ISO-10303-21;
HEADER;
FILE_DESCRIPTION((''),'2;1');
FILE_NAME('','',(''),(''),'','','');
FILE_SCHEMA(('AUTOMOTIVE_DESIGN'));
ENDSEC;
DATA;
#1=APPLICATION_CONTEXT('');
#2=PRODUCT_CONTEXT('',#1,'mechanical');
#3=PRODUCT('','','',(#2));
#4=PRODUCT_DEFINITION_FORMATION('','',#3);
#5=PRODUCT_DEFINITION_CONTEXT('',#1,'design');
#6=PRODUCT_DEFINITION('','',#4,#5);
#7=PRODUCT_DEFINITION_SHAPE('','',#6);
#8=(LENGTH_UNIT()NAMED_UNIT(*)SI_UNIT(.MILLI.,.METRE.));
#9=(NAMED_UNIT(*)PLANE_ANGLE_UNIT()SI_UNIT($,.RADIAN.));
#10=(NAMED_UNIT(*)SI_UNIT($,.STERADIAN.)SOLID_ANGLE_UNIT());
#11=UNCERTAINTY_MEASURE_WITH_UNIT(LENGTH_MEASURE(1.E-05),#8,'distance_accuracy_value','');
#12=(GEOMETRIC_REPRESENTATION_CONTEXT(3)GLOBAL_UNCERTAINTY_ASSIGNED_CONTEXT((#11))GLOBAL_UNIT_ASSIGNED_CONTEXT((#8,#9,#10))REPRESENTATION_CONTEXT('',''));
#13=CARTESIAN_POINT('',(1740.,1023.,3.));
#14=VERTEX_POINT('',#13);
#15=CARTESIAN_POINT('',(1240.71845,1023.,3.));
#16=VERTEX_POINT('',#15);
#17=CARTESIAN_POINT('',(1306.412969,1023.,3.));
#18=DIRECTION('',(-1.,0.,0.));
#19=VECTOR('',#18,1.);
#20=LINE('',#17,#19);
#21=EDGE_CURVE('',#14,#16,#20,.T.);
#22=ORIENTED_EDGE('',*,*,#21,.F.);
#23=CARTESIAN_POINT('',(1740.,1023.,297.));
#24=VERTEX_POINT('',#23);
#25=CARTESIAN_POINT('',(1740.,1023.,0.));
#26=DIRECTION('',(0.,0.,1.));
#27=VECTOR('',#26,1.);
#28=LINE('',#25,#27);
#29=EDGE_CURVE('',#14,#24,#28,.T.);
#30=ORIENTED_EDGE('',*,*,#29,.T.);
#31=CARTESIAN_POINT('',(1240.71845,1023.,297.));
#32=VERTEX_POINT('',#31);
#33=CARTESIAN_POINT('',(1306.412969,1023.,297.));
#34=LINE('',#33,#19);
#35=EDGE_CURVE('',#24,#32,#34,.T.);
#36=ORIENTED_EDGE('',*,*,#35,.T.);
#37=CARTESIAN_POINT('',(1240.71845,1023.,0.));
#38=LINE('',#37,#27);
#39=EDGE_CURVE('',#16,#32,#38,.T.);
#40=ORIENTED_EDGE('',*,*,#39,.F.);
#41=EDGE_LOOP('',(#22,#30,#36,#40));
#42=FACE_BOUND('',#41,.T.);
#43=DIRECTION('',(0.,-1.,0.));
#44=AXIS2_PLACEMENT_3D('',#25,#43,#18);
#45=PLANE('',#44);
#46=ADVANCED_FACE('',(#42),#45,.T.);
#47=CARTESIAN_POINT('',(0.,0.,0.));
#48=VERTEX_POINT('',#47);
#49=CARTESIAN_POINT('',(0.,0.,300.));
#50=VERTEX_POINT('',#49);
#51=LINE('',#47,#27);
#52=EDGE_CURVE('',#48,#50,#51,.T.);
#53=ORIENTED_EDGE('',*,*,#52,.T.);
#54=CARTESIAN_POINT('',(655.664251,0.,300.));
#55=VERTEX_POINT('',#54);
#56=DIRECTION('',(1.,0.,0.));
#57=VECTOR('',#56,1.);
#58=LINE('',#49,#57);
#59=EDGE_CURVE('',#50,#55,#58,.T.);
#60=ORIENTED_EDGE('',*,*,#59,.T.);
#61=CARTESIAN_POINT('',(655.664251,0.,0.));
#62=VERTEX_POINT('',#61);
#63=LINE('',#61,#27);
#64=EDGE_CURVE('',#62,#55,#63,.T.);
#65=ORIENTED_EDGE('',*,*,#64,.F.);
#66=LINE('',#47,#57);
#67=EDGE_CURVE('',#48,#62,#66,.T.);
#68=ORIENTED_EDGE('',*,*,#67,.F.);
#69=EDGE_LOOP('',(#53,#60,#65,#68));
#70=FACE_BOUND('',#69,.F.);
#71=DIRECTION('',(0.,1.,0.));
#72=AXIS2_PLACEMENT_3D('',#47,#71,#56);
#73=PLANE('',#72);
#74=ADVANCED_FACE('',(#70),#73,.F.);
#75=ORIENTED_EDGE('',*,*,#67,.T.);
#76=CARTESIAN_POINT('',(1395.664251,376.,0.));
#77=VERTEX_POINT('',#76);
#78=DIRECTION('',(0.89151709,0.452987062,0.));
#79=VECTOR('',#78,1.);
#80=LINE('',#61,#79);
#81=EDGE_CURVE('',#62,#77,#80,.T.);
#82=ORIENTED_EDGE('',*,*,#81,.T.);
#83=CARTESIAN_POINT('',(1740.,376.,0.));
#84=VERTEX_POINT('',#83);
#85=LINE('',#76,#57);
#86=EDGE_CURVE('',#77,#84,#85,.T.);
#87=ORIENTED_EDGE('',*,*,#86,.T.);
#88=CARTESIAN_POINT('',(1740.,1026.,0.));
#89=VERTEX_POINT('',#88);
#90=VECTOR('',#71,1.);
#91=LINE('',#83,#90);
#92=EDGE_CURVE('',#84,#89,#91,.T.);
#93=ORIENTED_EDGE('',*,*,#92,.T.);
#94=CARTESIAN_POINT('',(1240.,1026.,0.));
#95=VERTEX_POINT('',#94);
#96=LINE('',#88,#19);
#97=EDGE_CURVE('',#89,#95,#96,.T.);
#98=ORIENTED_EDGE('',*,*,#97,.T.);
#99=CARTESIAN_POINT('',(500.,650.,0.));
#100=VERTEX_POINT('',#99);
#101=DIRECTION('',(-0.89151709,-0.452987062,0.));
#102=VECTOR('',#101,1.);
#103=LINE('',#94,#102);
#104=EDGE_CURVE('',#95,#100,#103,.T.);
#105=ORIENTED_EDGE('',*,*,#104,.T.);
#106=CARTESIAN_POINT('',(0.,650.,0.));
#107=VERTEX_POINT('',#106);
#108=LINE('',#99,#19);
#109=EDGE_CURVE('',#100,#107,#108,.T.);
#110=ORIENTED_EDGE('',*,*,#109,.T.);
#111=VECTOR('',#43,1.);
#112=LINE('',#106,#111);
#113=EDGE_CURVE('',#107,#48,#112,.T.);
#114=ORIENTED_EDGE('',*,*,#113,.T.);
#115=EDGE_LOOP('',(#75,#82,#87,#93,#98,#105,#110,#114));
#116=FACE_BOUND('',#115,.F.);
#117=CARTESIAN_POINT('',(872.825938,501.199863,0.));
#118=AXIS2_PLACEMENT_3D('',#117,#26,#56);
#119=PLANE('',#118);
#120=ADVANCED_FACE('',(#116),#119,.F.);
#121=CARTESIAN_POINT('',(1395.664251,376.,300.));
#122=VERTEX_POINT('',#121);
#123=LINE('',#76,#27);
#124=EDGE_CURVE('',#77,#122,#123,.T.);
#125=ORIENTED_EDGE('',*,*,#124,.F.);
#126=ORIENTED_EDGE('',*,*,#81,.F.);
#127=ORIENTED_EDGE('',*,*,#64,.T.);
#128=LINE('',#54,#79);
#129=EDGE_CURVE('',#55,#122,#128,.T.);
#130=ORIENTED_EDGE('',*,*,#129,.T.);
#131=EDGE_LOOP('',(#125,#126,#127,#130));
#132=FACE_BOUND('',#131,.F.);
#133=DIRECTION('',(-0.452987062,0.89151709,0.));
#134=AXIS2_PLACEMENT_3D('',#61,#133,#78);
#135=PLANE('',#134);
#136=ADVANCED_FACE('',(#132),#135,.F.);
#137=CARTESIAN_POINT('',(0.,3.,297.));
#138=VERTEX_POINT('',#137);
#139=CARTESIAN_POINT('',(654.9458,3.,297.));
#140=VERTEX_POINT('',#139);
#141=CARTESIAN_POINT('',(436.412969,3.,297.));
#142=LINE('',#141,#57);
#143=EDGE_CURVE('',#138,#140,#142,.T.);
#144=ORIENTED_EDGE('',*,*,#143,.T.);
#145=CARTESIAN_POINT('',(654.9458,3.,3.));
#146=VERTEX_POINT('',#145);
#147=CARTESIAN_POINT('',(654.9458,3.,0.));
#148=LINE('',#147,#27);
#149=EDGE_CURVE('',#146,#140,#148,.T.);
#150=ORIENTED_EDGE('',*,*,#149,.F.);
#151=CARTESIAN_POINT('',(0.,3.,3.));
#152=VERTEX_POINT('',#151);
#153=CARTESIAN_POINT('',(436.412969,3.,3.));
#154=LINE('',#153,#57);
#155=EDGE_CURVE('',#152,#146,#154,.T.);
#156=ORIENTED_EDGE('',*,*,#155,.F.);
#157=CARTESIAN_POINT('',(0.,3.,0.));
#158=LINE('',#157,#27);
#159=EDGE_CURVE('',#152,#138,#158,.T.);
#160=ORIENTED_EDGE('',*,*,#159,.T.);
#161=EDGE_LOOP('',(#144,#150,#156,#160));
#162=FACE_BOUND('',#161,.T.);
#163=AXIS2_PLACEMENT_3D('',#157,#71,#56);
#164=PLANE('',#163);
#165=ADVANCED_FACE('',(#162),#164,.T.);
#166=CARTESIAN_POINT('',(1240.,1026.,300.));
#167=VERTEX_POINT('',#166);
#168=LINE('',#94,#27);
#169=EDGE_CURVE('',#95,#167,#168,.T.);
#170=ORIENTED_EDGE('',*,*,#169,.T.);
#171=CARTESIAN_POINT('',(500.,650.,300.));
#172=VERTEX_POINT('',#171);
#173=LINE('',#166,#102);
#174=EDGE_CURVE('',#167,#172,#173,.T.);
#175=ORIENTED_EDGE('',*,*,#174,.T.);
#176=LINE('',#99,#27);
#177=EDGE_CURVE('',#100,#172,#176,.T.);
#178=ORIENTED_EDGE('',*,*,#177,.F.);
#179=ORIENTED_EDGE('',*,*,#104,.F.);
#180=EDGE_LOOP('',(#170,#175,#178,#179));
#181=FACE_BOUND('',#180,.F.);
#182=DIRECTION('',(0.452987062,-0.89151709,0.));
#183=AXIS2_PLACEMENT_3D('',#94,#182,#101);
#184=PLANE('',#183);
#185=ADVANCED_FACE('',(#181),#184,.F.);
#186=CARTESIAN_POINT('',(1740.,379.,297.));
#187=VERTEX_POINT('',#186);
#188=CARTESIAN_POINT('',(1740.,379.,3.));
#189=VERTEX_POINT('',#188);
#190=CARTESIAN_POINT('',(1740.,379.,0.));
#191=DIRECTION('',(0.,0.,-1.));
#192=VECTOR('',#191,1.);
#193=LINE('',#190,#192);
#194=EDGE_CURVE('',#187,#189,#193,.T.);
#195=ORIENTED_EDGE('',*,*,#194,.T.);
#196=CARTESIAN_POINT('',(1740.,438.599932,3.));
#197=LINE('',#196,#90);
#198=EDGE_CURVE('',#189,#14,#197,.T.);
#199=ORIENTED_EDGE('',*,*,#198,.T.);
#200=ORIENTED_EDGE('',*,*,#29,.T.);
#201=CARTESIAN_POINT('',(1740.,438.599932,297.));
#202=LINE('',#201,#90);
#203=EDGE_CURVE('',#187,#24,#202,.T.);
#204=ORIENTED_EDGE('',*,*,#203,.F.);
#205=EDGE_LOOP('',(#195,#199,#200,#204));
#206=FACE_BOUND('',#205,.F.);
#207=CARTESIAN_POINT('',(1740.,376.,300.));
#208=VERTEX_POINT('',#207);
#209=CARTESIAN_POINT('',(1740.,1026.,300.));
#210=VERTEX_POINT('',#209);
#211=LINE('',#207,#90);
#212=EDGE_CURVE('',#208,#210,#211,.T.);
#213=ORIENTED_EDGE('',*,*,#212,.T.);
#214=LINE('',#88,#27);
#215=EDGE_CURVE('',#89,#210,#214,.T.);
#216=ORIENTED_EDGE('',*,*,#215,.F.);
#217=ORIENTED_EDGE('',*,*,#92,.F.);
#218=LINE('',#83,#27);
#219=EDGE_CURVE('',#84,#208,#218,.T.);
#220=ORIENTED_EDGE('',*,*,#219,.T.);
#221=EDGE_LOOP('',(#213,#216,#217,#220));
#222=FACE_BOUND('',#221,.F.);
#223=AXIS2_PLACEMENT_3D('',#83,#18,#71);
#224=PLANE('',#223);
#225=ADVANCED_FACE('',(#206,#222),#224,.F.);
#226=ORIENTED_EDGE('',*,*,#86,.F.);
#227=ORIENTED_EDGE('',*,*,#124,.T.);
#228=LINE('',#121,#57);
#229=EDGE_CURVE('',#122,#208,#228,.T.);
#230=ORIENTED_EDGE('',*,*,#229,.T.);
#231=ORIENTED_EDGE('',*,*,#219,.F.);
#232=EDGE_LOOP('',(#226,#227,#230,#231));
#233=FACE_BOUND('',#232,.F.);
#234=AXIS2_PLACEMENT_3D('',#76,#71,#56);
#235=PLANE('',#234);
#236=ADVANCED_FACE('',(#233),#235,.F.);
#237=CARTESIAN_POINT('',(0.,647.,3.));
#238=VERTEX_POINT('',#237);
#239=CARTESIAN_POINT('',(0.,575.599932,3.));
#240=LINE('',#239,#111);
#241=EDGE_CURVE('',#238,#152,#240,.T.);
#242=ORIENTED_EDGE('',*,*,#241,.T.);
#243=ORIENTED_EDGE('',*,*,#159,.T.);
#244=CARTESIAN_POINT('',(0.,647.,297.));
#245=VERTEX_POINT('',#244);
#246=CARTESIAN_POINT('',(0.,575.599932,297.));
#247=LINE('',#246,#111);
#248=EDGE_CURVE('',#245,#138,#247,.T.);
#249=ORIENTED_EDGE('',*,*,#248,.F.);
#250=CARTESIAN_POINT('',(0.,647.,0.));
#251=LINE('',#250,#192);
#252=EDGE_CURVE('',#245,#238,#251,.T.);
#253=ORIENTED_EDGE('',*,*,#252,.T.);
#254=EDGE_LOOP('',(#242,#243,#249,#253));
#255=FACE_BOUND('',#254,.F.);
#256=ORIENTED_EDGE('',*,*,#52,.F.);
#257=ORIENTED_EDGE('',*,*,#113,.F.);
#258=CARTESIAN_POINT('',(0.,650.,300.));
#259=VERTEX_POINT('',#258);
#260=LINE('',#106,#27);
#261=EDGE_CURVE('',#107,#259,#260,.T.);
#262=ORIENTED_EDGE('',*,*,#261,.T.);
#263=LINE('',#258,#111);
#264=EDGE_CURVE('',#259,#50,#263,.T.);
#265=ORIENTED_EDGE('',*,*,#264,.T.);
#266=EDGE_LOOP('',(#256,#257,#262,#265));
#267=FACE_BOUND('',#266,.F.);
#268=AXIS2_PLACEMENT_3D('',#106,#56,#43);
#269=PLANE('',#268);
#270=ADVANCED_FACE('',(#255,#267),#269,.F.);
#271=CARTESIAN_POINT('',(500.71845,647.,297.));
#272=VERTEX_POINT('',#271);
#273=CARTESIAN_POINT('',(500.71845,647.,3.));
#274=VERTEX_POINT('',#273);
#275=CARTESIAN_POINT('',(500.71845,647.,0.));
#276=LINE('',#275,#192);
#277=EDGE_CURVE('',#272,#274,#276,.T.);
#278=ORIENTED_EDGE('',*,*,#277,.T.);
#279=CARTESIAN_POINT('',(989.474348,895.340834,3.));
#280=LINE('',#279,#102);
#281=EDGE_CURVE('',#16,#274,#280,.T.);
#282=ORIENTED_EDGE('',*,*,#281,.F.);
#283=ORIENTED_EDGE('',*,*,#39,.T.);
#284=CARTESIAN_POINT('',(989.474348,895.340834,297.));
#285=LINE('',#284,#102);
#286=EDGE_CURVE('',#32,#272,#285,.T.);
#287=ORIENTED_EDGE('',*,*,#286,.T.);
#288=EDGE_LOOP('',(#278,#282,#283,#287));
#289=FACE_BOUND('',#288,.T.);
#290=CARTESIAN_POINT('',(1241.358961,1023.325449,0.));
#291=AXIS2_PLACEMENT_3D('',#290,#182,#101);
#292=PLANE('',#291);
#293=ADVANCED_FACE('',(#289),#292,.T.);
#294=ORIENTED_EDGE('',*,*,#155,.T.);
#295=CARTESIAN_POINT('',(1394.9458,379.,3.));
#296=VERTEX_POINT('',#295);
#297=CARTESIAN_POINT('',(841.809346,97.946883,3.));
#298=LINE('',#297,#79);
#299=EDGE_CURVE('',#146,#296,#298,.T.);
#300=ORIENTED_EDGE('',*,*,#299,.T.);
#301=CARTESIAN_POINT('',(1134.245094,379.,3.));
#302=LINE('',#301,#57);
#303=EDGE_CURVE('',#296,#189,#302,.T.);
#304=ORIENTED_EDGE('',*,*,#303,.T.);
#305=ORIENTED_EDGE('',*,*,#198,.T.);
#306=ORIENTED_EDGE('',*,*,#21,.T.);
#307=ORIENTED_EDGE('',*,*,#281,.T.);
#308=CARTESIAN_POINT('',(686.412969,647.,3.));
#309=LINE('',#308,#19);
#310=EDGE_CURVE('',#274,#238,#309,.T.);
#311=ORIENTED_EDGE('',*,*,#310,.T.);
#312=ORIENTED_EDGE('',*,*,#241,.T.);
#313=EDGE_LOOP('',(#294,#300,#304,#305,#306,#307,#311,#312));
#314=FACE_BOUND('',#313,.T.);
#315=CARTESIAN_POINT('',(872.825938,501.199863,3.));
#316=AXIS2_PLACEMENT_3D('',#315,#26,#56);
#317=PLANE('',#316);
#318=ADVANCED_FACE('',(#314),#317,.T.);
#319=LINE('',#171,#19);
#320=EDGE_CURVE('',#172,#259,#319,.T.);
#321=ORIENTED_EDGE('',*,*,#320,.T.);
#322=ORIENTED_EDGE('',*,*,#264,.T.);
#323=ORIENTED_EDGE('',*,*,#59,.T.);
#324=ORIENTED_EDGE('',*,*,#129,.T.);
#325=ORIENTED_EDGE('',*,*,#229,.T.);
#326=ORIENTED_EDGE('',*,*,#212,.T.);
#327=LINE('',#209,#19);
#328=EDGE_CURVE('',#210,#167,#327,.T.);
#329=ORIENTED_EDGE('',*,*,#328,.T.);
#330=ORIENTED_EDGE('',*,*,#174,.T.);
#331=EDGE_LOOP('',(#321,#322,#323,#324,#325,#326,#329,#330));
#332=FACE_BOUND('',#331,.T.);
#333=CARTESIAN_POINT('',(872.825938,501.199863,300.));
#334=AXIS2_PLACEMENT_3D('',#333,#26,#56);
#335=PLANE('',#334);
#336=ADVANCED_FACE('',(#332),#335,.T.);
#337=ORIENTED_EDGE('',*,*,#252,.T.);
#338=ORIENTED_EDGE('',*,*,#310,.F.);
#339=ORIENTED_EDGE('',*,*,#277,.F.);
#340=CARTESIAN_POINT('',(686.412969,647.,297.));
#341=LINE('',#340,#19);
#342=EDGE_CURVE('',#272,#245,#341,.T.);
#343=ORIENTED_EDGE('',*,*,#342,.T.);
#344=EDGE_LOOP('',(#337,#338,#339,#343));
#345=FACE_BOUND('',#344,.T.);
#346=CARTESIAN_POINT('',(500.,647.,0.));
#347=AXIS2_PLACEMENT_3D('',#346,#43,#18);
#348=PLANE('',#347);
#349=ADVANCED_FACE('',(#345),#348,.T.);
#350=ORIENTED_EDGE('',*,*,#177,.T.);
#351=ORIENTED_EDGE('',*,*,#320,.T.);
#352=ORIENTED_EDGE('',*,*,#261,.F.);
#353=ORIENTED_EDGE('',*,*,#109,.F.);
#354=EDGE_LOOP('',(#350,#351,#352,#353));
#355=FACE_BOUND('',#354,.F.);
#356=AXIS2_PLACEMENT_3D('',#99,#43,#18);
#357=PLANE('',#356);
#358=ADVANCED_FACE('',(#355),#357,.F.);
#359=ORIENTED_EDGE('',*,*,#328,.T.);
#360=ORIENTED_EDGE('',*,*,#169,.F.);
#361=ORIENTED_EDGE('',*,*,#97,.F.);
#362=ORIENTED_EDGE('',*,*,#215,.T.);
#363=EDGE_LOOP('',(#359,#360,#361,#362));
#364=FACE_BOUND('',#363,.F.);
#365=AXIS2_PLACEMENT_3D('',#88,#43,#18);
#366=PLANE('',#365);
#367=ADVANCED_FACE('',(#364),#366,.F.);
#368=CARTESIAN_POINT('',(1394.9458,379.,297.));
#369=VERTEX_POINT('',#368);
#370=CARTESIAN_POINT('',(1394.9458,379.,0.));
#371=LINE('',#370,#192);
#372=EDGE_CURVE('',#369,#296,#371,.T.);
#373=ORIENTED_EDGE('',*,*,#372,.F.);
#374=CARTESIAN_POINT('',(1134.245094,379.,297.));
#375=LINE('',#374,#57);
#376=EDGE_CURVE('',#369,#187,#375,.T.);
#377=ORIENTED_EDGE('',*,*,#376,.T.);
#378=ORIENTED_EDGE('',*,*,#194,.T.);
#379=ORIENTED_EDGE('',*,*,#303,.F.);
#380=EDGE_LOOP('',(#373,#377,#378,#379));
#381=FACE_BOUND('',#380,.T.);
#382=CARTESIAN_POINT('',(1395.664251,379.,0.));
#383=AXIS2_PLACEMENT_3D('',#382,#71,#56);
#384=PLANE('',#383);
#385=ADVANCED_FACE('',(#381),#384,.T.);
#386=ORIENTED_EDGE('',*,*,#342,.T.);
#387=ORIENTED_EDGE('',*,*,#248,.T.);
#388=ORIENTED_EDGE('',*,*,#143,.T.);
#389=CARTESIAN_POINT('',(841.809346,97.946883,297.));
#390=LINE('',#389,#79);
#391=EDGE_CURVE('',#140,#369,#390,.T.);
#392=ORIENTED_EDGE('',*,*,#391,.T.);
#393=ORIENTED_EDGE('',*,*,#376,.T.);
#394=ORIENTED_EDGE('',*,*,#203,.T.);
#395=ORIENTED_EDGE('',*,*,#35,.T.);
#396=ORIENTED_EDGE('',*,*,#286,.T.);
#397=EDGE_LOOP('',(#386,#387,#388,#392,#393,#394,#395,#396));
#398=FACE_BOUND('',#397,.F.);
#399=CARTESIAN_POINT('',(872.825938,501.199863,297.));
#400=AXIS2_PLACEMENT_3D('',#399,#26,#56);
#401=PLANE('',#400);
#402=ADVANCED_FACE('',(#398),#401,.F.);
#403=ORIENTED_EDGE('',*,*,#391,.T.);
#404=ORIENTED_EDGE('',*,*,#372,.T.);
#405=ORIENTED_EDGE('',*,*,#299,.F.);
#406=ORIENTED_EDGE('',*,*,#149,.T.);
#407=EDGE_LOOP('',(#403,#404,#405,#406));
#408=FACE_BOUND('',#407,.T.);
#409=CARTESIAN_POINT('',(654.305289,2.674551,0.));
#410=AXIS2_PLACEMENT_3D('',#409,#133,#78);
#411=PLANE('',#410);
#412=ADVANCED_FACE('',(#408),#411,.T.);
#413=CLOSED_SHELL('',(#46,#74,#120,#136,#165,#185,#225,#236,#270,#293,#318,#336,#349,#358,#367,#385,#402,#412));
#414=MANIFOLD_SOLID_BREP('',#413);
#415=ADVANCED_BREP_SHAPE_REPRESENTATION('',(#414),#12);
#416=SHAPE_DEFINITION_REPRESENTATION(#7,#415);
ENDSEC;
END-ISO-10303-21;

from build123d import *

# Parameters (mm, degrees)
F1_DEPTH = 300
F2_T     = -3


with BuildPart() as f1:
    # F0 (on Top) → F1 (new body)
    with BuildSketch(Plane.XY):
        Polygon((0, 650), (0, 0), (655.664250573, 0), (1395.664250573, 376), (1740, 376), (1740, 1026), (1240, 1026), (500, 650), align=None)
    extrude(amount=F1_DEPTH)

    # F2
    f2_openings = [f1.faces().sort_by_distance(p)[0] for p in [
        (0, 325, 150),
        (1740, 701, 150),
    ]]
    offset(amount=F2_T, openings=f2_openings, kind=Kind.INTERSECTION)


solid = f1.part
